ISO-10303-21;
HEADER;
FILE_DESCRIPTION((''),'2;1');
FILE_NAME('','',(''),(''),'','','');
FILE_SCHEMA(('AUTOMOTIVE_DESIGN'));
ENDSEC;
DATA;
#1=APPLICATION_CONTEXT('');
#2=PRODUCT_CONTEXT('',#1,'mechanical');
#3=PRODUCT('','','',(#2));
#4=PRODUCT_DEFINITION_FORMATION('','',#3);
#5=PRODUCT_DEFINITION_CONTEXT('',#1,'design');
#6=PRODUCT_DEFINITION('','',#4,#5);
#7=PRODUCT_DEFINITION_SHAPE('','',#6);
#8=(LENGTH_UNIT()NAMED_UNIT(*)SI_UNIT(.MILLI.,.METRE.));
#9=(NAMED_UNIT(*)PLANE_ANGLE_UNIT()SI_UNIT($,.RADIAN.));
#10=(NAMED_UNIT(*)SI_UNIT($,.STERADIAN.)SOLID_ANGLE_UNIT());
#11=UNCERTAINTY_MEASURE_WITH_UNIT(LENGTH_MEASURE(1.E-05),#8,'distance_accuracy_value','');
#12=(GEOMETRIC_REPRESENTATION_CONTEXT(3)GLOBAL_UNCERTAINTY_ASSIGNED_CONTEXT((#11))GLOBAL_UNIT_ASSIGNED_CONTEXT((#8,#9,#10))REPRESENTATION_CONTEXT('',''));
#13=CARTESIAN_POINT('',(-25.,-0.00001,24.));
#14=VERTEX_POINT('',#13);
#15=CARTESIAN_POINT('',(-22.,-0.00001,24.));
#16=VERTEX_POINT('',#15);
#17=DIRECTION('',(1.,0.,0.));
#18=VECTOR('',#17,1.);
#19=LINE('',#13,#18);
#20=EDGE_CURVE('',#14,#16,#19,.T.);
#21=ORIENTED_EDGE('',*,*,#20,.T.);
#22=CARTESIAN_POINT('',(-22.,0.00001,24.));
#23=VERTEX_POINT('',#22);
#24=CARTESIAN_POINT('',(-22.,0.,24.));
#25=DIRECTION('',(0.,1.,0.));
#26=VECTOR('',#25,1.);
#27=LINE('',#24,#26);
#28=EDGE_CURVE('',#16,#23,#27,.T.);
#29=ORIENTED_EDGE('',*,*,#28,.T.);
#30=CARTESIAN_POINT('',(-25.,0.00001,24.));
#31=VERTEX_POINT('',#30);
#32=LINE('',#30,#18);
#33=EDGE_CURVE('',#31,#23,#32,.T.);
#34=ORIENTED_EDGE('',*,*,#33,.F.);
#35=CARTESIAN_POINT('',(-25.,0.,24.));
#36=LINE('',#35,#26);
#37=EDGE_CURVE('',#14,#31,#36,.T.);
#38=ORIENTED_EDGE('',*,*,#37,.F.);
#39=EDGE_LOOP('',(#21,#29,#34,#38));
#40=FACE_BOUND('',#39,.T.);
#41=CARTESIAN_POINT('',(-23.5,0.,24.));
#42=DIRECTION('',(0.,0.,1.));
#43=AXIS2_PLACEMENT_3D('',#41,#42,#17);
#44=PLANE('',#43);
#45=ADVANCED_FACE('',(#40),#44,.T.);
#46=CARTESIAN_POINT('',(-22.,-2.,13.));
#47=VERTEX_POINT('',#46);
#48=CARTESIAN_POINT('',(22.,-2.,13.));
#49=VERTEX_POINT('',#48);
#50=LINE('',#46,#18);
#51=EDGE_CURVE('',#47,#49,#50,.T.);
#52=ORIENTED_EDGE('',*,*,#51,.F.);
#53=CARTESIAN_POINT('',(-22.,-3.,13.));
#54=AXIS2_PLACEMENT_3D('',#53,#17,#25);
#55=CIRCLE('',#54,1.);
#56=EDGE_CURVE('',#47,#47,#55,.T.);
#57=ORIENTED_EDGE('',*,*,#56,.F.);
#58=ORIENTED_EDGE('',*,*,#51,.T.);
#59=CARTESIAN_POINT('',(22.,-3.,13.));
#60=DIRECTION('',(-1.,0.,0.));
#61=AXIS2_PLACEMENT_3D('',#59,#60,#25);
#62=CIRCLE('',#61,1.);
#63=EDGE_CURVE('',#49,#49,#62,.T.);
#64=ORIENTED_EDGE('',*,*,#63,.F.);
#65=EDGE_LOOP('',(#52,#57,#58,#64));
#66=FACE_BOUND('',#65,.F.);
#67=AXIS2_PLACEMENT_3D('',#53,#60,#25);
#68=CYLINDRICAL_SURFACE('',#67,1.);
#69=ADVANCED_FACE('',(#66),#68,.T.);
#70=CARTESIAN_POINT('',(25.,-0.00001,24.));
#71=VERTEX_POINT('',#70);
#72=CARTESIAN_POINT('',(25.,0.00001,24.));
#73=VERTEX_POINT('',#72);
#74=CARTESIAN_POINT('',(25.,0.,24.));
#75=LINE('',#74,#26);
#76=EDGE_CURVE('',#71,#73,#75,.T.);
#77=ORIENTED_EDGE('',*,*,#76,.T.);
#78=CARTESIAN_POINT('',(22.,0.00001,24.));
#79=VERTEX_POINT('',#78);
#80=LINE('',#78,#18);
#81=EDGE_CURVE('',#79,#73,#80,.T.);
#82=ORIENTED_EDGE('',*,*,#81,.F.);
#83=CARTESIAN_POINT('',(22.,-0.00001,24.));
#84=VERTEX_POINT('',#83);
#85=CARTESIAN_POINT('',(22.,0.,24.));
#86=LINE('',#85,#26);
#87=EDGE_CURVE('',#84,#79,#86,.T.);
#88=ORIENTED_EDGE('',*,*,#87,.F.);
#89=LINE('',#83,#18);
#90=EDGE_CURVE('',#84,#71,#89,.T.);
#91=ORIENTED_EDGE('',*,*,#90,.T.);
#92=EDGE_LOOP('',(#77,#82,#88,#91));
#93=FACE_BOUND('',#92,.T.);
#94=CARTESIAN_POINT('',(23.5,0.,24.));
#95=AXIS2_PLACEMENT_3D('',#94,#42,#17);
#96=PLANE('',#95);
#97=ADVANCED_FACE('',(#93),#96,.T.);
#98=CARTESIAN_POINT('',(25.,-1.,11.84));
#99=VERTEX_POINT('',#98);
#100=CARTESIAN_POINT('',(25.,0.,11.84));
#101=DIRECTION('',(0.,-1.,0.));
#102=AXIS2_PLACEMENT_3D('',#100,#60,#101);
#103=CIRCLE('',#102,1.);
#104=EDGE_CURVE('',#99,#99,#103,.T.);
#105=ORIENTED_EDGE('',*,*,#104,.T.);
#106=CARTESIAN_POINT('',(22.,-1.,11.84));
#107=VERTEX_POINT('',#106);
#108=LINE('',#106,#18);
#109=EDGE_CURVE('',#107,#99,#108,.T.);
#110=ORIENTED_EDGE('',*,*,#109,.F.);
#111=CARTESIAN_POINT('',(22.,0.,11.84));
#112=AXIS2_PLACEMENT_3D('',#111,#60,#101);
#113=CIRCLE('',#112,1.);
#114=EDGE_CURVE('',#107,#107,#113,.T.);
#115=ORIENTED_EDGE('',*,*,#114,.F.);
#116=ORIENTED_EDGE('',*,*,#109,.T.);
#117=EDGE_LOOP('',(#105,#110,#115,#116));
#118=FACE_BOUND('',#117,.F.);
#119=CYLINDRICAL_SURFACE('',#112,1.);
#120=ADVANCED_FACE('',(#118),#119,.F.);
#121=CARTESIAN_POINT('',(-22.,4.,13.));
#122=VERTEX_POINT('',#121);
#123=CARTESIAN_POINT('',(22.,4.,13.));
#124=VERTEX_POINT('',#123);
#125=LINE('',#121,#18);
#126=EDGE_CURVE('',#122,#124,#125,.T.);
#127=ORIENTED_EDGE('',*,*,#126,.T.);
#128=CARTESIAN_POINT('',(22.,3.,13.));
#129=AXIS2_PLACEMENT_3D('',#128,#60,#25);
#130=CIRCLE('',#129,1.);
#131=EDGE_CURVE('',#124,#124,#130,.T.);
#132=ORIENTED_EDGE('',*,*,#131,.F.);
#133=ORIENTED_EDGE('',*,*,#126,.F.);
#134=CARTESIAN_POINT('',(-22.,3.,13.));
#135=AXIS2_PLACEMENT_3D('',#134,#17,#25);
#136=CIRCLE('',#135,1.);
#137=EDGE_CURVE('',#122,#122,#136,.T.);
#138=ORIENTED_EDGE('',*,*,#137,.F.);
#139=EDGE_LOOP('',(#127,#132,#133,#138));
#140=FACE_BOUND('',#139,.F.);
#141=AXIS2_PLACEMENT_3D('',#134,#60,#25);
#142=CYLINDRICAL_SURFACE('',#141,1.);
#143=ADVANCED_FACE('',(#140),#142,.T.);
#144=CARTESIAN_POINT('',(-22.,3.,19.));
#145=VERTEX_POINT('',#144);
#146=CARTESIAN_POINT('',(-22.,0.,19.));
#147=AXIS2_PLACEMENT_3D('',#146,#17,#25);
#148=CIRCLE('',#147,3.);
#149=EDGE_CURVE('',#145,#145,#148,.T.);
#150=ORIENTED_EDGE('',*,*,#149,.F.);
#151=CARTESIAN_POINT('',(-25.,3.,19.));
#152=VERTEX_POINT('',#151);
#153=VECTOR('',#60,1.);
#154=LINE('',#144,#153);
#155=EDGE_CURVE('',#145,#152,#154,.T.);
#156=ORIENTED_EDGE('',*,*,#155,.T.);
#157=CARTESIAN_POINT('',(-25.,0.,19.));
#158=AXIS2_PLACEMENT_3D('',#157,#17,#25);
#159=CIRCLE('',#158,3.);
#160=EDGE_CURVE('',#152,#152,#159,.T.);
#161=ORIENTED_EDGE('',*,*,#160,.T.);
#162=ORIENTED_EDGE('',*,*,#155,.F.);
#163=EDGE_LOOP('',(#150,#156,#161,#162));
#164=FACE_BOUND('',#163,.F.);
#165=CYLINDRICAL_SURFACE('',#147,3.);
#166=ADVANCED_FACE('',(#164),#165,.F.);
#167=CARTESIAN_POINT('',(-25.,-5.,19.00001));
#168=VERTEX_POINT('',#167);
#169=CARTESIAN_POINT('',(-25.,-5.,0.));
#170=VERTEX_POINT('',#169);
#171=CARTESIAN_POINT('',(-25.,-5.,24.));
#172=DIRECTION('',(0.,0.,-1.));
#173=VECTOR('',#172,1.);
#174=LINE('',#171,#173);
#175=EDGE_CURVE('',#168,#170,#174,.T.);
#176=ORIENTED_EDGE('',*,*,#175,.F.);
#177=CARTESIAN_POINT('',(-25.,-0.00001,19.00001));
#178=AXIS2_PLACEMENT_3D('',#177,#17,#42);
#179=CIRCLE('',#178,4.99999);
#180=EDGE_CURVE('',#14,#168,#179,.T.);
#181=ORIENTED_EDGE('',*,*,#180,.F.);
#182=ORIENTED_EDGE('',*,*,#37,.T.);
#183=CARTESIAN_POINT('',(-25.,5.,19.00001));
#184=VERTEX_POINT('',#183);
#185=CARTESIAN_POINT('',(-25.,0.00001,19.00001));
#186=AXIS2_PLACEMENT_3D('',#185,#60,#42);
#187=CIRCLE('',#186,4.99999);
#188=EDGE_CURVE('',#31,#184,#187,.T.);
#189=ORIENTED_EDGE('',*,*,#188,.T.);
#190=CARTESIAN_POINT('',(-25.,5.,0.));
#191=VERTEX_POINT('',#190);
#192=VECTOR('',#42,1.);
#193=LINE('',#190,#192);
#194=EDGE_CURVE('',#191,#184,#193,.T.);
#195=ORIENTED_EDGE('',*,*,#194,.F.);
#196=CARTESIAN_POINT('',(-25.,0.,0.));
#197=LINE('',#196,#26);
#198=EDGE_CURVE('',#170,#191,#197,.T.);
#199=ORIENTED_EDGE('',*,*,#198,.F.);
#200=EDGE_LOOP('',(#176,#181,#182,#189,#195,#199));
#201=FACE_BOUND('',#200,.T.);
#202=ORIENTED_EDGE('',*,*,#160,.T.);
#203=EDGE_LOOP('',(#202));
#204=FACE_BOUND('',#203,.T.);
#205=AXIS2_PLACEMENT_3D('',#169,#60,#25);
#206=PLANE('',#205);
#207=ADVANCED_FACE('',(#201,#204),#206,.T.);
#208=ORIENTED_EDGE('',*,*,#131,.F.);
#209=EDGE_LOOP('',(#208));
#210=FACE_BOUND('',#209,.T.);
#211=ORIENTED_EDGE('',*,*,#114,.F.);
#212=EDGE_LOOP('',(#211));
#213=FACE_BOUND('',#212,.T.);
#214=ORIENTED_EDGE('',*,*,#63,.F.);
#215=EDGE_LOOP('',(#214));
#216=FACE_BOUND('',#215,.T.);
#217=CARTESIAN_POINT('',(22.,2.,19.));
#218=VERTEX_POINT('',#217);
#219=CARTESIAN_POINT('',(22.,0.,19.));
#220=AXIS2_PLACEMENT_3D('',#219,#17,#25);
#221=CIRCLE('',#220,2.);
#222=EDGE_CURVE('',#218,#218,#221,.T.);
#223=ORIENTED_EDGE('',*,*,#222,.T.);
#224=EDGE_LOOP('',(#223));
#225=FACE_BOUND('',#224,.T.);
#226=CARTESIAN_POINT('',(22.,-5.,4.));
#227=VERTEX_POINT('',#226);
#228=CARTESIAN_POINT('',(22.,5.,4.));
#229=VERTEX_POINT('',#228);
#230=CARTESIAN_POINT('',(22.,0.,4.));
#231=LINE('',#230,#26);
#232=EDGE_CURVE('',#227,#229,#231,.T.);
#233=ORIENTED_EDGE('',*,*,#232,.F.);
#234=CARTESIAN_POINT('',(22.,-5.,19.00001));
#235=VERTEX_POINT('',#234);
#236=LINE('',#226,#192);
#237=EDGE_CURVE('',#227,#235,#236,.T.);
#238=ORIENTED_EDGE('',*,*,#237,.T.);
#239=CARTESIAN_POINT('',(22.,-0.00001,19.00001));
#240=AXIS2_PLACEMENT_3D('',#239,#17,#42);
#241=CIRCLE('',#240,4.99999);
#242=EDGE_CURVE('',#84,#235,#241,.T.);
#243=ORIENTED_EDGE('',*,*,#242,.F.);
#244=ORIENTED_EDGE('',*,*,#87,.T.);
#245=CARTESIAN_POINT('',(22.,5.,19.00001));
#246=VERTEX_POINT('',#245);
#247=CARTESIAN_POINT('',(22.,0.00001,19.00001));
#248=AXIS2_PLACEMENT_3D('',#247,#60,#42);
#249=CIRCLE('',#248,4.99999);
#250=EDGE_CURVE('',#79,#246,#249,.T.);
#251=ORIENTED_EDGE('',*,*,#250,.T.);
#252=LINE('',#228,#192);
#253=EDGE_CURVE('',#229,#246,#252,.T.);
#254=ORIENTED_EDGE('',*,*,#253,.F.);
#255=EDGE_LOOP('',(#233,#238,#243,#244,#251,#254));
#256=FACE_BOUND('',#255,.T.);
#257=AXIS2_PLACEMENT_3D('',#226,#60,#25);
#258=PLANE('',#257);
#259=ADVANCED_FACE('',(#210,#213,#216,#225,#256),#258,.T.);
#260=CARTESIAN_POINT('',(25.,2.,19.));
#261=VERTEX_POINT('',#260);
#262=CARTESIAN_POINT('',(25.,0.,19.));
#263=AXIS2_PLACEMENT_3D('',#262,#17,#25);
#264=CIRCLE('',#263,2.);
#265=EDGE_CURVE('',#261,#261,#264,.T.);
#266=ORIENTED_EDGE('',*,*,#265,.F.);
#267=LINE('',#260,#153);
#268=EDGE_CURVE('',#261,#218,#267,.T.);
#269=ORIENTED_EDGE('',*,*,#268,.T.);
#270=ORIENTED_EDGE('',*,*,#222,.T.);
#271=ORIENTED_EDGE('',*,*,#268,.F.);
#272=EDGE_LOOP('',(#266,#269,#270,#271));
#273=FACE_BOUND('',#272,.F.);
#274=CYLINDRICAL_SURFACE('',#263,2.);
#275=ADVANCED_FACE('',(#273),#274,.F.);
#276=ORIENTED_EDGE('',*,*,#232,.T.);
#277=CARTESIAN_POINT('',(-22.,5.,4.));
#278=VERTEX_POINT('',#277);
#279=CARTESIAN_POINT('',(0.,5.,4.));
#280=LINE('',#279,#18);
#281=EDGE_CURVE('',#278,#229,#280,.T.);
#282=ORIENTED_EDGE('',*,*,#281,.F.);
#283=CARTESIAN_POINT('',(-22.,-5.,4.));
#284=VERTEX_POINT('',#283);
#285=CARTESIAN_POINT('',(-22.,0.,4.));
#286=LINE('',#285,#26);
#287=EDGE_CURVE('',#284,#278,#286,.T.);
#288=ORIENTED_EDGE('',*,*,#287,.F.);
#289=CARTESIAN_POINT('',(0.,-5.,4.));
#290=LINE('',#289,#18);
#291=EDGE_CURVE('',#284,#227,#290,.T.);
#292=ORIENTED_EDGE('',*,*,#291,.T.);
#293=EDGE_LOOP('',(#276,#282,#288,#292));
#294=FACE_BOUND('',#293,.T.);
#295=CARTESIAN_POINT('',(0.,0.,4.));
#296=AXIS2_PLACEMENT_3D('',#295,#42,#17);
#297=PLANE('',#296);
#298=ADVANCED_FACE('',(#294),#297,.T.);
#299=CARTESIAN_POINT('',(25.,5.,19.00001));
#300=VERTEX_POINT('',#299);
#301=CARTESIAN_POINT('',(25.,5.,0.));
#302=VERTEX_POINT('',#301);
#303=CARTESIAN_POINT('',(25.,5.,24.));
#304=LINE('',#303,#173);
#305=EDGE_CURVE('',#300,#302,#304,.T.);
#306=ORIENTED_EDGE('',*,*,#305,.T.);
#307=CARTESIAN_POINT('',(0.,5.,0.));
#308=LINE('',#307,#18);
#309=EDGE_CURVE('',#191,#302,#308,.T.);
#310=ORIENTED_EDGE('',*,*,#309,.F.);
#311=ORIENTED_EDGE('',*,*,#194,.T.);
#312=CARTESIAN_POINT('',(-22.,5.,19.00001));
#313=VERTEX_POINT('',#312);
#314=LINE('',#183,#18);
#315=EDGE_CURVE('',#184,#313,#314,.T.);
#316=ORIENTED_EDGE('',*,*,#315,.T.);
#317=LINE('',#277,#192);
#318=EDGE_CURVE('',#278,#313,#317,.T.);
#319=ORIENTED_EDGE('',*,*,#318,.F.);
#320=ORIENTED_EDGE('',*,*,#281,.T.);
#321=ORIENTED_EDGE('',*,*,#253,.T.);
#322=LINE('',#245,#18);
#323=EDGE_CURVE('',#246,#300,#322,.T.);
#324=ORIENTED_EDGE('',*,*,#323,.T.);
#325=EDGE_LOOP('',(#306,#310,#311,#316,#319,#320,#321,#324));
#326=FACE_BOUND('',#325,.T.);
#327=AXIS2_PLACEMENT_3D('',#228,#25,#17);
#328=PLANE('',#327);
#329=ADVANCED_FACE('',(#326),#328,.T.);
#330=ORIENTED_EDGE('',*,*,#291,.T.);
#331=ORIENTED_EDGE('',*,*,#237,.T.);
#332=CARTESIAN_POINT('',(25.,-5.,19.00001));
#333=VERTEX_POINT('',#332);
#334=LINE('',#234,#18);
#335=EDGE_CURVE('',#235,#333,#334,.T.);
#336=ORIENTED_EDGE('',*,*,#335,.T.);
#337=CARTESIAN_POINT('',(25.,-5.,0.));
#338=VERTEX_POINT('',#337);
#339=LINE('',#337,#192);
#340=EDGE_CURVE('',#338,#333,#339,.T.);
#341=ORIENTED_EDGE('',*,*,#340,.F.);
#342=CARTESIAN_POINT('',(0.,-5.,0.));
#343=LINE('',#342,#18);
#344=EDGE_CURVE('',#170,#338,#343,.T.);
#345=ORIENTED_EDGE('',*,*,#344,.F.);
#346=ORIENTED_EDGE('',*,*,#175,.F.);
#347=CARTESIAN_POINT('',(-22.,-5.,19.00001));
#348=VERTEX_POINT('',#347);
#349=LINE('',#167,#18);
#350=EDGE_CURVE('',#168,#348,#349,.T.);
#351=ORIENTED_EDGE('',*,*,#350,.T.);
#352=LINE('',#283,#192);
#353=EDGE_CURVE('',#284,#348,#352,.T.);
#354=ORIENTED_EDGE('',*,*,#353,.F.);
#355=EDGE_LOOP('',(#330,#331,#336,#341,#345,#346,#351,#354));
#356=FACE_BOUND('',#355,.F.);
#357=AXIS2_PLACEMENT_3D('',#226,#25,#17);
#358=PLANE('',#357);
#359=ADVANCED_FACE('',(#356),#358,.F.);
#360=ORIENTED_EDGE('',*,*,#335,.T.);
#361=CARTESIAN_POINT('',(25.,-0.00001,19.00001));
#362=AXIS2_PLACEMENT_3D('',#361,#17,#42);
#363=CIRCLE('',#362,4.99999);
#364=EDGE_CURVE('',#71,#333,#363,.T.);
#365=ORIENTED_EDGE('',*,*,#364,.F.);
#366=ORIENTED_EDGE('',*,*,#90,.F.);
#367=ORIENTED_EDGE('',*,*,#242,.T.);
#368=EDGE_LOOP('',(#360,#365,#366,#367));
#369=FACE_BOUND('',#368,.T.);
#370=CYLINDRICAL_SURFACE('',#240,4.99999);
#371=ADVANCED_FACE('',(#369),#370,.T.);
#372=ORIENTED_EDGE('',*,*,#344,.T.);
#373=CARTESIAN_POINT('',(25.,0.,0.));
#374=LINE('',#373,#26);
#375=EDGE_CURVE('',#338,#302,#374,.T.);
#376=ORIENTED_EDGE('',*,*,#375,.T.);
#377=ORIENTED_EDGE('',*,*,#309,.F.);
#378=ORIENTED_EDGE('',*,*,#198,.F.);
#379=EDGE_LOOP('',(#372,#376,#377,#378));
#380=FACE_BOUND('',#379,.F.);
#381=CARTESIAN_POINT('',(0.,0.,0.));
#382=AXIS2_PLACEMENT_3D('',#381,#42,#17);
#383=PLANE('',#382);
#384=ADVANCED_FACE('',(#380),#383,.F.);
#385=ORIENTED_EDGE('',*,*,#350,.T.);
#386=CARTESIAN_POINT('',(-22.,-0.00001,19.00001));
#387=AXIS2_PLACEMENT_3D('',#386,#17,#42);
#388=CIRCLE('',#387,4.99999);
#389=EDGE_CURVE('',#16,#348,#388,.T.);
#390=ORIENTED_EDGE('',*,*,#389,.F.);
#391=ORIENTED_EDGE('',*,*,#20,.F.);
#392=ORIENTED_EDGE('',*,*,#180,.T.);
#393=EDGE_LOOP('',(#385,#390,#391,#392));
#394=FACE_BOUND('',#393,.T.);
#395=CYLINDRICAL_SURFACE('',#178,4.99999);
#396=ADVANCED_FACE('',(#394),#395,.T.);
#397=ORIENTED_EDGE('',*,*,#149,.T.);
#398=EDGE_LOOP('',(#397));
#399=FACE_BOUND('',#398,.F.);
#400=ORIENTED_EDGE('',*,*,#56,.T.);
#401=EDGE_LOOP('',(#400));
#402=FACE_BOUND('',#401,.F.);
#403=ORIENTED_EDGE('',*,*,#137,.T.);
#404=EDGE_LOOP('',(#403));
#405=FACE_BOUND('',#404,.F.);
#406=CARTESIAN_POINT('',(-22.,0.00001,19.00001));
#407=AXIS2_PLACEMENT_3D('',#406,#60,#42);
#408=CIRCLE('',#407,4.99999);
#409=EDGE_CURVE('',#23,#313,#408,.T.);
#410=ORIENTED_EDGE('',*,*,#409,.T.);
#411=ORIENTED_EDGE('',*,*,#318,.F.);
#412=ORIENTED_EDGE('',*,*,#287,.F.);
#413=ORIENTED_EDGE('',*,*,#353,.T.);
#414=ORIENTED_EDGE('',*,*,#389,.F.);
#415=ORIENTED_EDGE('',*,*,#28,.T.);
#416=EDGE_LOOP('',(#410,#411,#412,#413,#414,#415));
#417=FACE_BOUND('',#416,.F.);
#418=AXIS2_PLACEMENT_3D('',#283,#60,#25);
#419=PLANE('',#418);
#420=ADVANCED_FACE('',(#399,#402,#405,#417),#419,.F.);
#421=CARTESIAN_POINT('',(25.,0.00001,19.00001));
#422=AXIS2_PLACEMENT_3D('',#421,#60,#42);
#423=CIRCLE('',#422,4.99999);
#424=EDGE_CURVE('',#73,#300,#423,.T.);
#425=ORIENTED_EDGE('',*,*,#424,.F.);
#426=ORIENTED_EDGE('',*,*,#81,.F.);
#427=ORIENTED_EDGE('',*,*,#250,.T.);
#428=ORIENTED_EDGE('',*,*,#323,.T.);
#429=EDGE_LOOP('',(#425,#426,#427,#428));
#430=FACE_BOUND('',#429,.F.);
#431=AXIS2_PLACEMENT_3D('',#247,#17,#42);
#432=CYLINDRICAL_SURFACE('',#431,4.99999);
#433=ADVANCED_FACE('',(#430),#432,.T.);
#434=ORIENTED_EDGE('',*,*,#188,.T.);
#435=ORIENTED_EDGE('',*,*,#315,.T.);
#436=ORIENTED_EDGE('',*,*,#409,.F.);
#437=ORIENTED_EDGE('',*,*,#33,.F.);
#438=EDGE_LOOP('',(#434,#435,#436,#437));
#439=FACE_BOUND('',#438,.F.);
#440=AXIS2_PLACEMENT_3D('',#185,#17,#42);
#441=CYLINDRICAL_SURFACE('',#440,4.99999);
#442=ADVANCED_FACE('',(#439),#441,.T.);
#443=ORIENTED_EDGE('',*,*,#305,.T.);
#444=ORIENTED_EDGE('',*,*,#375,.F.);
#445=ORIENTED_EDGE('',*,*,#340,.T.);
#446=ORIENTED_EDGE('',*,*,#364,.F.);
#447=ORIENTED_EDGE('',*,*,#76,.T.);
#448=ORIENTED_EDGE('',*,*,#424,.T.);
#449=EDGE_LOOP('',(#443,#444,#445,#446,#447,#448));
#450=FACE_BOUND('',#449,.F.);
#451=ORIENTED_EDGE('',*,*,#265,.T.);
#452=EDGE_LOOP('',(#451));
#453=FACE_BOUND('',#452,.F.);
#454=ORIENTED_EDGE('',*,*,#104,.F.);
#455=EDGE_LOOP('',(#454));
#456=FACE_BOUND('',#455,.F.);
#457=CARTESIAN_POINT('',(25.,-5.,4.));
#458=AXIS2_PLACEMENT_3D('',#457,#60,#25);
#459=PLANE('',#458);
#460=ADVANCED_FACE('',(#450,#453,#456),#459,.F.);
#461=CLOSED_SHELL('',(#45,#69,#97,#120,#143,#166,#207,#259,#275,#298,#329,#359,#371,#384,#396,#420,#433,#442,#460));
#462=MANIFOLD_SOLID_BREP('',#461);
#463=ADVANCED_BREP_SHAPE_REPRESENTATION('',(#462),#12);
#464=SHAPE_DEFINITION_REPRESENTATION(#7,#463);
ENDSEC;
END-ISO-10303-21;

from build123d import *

# Parameters (mm, degrees)
F0_W      = 50
F0_H      = 10
F1_DEPTH  = 4
F2_W      = 3
F2_H      = 10
F3_DEPTH  = 20
F4_R      = 4.99999
F5_R      = 2
F6_DEPTH  = 25
F7_R      = 3
F8_DEPTH  = 25
F9_R      = 1
F10_DEPTH = 46
F11_R     = 1
F12_DEPTH = 25


# Not quite as in the source:
# - a fillet or chamfer is up to 0.001 mm smaller than in the source, because OpenCascade refuses the exact size


with BuildPart() as f1:
    # F0 (on Top) → F1 (new body)
    with BuildSketch(Plane.XY):
        Rectangle(F0_W, F0_H)
    extrude(amount=F1_DEPTH)

    # F2 (on face) → F3 (join)
    with BuildSketch(Plane.XY.offset(4)):
        with Locations((23.5, 0)):
            Rectangle(F2_W, F2_H)
        with Locations((-23.5, 0)):
            Rectangle(F2_W, F2_H)
    extrude(amount=F3_DEPTH)

    # F4 (radius 5 in the source; OpenCascade refuses exactly that, so slightly less here)
    f4_edges = [f1.edges().sort_by_distance(p)[0] for p in [
        (-23.5, -5, 24),
        (-23.5, 5, 24),
        (23.5, -5, 24),
        (23.5, 5, 24),
    ]]
    fillet(f4_edges, radius=F4_R)

    # F5 (on face) → F6 (cut)
    with BuildSketch(Plane.YZ.offset(25)):
        with Locations((0, 19)):
            Circle(F5_R)
    extrude(amount=-F6_DEPTH, mode=Mode.SUBTRACT)

    # F7 (on face) → F8 (cut)
    with BuildSketch(Plane.YZ.offset(-22)):
        with Locations((0, 19)):
            Circle(F7_R)
    extrude(amount=-F8_DEPTH, mode=Mode.SUBTRACT)

    # F9 (on face) → F10 (join)
    with BuildSketch(Plane.YZ.offset(-22)):
        with Locations((-3, 13)):
            Circle(F9_R)
        with Locations((3, 13)):
            Circle(F9_R)
    extrude(amount=F10_DEPTH)

    # F11 (on face) → F12 (cut)
    with BuildSketch(Plane(origin=(22, 0, 0), x_dir=(0, -1, 0), z_dir=(-1, 0, 0))):
        with Locations((0, 11.84)):
            Circle(F11_R)
    extrude(amount=-F12_DEPTH, mode=Mode.SUBTRACT)


solid = f1.part
